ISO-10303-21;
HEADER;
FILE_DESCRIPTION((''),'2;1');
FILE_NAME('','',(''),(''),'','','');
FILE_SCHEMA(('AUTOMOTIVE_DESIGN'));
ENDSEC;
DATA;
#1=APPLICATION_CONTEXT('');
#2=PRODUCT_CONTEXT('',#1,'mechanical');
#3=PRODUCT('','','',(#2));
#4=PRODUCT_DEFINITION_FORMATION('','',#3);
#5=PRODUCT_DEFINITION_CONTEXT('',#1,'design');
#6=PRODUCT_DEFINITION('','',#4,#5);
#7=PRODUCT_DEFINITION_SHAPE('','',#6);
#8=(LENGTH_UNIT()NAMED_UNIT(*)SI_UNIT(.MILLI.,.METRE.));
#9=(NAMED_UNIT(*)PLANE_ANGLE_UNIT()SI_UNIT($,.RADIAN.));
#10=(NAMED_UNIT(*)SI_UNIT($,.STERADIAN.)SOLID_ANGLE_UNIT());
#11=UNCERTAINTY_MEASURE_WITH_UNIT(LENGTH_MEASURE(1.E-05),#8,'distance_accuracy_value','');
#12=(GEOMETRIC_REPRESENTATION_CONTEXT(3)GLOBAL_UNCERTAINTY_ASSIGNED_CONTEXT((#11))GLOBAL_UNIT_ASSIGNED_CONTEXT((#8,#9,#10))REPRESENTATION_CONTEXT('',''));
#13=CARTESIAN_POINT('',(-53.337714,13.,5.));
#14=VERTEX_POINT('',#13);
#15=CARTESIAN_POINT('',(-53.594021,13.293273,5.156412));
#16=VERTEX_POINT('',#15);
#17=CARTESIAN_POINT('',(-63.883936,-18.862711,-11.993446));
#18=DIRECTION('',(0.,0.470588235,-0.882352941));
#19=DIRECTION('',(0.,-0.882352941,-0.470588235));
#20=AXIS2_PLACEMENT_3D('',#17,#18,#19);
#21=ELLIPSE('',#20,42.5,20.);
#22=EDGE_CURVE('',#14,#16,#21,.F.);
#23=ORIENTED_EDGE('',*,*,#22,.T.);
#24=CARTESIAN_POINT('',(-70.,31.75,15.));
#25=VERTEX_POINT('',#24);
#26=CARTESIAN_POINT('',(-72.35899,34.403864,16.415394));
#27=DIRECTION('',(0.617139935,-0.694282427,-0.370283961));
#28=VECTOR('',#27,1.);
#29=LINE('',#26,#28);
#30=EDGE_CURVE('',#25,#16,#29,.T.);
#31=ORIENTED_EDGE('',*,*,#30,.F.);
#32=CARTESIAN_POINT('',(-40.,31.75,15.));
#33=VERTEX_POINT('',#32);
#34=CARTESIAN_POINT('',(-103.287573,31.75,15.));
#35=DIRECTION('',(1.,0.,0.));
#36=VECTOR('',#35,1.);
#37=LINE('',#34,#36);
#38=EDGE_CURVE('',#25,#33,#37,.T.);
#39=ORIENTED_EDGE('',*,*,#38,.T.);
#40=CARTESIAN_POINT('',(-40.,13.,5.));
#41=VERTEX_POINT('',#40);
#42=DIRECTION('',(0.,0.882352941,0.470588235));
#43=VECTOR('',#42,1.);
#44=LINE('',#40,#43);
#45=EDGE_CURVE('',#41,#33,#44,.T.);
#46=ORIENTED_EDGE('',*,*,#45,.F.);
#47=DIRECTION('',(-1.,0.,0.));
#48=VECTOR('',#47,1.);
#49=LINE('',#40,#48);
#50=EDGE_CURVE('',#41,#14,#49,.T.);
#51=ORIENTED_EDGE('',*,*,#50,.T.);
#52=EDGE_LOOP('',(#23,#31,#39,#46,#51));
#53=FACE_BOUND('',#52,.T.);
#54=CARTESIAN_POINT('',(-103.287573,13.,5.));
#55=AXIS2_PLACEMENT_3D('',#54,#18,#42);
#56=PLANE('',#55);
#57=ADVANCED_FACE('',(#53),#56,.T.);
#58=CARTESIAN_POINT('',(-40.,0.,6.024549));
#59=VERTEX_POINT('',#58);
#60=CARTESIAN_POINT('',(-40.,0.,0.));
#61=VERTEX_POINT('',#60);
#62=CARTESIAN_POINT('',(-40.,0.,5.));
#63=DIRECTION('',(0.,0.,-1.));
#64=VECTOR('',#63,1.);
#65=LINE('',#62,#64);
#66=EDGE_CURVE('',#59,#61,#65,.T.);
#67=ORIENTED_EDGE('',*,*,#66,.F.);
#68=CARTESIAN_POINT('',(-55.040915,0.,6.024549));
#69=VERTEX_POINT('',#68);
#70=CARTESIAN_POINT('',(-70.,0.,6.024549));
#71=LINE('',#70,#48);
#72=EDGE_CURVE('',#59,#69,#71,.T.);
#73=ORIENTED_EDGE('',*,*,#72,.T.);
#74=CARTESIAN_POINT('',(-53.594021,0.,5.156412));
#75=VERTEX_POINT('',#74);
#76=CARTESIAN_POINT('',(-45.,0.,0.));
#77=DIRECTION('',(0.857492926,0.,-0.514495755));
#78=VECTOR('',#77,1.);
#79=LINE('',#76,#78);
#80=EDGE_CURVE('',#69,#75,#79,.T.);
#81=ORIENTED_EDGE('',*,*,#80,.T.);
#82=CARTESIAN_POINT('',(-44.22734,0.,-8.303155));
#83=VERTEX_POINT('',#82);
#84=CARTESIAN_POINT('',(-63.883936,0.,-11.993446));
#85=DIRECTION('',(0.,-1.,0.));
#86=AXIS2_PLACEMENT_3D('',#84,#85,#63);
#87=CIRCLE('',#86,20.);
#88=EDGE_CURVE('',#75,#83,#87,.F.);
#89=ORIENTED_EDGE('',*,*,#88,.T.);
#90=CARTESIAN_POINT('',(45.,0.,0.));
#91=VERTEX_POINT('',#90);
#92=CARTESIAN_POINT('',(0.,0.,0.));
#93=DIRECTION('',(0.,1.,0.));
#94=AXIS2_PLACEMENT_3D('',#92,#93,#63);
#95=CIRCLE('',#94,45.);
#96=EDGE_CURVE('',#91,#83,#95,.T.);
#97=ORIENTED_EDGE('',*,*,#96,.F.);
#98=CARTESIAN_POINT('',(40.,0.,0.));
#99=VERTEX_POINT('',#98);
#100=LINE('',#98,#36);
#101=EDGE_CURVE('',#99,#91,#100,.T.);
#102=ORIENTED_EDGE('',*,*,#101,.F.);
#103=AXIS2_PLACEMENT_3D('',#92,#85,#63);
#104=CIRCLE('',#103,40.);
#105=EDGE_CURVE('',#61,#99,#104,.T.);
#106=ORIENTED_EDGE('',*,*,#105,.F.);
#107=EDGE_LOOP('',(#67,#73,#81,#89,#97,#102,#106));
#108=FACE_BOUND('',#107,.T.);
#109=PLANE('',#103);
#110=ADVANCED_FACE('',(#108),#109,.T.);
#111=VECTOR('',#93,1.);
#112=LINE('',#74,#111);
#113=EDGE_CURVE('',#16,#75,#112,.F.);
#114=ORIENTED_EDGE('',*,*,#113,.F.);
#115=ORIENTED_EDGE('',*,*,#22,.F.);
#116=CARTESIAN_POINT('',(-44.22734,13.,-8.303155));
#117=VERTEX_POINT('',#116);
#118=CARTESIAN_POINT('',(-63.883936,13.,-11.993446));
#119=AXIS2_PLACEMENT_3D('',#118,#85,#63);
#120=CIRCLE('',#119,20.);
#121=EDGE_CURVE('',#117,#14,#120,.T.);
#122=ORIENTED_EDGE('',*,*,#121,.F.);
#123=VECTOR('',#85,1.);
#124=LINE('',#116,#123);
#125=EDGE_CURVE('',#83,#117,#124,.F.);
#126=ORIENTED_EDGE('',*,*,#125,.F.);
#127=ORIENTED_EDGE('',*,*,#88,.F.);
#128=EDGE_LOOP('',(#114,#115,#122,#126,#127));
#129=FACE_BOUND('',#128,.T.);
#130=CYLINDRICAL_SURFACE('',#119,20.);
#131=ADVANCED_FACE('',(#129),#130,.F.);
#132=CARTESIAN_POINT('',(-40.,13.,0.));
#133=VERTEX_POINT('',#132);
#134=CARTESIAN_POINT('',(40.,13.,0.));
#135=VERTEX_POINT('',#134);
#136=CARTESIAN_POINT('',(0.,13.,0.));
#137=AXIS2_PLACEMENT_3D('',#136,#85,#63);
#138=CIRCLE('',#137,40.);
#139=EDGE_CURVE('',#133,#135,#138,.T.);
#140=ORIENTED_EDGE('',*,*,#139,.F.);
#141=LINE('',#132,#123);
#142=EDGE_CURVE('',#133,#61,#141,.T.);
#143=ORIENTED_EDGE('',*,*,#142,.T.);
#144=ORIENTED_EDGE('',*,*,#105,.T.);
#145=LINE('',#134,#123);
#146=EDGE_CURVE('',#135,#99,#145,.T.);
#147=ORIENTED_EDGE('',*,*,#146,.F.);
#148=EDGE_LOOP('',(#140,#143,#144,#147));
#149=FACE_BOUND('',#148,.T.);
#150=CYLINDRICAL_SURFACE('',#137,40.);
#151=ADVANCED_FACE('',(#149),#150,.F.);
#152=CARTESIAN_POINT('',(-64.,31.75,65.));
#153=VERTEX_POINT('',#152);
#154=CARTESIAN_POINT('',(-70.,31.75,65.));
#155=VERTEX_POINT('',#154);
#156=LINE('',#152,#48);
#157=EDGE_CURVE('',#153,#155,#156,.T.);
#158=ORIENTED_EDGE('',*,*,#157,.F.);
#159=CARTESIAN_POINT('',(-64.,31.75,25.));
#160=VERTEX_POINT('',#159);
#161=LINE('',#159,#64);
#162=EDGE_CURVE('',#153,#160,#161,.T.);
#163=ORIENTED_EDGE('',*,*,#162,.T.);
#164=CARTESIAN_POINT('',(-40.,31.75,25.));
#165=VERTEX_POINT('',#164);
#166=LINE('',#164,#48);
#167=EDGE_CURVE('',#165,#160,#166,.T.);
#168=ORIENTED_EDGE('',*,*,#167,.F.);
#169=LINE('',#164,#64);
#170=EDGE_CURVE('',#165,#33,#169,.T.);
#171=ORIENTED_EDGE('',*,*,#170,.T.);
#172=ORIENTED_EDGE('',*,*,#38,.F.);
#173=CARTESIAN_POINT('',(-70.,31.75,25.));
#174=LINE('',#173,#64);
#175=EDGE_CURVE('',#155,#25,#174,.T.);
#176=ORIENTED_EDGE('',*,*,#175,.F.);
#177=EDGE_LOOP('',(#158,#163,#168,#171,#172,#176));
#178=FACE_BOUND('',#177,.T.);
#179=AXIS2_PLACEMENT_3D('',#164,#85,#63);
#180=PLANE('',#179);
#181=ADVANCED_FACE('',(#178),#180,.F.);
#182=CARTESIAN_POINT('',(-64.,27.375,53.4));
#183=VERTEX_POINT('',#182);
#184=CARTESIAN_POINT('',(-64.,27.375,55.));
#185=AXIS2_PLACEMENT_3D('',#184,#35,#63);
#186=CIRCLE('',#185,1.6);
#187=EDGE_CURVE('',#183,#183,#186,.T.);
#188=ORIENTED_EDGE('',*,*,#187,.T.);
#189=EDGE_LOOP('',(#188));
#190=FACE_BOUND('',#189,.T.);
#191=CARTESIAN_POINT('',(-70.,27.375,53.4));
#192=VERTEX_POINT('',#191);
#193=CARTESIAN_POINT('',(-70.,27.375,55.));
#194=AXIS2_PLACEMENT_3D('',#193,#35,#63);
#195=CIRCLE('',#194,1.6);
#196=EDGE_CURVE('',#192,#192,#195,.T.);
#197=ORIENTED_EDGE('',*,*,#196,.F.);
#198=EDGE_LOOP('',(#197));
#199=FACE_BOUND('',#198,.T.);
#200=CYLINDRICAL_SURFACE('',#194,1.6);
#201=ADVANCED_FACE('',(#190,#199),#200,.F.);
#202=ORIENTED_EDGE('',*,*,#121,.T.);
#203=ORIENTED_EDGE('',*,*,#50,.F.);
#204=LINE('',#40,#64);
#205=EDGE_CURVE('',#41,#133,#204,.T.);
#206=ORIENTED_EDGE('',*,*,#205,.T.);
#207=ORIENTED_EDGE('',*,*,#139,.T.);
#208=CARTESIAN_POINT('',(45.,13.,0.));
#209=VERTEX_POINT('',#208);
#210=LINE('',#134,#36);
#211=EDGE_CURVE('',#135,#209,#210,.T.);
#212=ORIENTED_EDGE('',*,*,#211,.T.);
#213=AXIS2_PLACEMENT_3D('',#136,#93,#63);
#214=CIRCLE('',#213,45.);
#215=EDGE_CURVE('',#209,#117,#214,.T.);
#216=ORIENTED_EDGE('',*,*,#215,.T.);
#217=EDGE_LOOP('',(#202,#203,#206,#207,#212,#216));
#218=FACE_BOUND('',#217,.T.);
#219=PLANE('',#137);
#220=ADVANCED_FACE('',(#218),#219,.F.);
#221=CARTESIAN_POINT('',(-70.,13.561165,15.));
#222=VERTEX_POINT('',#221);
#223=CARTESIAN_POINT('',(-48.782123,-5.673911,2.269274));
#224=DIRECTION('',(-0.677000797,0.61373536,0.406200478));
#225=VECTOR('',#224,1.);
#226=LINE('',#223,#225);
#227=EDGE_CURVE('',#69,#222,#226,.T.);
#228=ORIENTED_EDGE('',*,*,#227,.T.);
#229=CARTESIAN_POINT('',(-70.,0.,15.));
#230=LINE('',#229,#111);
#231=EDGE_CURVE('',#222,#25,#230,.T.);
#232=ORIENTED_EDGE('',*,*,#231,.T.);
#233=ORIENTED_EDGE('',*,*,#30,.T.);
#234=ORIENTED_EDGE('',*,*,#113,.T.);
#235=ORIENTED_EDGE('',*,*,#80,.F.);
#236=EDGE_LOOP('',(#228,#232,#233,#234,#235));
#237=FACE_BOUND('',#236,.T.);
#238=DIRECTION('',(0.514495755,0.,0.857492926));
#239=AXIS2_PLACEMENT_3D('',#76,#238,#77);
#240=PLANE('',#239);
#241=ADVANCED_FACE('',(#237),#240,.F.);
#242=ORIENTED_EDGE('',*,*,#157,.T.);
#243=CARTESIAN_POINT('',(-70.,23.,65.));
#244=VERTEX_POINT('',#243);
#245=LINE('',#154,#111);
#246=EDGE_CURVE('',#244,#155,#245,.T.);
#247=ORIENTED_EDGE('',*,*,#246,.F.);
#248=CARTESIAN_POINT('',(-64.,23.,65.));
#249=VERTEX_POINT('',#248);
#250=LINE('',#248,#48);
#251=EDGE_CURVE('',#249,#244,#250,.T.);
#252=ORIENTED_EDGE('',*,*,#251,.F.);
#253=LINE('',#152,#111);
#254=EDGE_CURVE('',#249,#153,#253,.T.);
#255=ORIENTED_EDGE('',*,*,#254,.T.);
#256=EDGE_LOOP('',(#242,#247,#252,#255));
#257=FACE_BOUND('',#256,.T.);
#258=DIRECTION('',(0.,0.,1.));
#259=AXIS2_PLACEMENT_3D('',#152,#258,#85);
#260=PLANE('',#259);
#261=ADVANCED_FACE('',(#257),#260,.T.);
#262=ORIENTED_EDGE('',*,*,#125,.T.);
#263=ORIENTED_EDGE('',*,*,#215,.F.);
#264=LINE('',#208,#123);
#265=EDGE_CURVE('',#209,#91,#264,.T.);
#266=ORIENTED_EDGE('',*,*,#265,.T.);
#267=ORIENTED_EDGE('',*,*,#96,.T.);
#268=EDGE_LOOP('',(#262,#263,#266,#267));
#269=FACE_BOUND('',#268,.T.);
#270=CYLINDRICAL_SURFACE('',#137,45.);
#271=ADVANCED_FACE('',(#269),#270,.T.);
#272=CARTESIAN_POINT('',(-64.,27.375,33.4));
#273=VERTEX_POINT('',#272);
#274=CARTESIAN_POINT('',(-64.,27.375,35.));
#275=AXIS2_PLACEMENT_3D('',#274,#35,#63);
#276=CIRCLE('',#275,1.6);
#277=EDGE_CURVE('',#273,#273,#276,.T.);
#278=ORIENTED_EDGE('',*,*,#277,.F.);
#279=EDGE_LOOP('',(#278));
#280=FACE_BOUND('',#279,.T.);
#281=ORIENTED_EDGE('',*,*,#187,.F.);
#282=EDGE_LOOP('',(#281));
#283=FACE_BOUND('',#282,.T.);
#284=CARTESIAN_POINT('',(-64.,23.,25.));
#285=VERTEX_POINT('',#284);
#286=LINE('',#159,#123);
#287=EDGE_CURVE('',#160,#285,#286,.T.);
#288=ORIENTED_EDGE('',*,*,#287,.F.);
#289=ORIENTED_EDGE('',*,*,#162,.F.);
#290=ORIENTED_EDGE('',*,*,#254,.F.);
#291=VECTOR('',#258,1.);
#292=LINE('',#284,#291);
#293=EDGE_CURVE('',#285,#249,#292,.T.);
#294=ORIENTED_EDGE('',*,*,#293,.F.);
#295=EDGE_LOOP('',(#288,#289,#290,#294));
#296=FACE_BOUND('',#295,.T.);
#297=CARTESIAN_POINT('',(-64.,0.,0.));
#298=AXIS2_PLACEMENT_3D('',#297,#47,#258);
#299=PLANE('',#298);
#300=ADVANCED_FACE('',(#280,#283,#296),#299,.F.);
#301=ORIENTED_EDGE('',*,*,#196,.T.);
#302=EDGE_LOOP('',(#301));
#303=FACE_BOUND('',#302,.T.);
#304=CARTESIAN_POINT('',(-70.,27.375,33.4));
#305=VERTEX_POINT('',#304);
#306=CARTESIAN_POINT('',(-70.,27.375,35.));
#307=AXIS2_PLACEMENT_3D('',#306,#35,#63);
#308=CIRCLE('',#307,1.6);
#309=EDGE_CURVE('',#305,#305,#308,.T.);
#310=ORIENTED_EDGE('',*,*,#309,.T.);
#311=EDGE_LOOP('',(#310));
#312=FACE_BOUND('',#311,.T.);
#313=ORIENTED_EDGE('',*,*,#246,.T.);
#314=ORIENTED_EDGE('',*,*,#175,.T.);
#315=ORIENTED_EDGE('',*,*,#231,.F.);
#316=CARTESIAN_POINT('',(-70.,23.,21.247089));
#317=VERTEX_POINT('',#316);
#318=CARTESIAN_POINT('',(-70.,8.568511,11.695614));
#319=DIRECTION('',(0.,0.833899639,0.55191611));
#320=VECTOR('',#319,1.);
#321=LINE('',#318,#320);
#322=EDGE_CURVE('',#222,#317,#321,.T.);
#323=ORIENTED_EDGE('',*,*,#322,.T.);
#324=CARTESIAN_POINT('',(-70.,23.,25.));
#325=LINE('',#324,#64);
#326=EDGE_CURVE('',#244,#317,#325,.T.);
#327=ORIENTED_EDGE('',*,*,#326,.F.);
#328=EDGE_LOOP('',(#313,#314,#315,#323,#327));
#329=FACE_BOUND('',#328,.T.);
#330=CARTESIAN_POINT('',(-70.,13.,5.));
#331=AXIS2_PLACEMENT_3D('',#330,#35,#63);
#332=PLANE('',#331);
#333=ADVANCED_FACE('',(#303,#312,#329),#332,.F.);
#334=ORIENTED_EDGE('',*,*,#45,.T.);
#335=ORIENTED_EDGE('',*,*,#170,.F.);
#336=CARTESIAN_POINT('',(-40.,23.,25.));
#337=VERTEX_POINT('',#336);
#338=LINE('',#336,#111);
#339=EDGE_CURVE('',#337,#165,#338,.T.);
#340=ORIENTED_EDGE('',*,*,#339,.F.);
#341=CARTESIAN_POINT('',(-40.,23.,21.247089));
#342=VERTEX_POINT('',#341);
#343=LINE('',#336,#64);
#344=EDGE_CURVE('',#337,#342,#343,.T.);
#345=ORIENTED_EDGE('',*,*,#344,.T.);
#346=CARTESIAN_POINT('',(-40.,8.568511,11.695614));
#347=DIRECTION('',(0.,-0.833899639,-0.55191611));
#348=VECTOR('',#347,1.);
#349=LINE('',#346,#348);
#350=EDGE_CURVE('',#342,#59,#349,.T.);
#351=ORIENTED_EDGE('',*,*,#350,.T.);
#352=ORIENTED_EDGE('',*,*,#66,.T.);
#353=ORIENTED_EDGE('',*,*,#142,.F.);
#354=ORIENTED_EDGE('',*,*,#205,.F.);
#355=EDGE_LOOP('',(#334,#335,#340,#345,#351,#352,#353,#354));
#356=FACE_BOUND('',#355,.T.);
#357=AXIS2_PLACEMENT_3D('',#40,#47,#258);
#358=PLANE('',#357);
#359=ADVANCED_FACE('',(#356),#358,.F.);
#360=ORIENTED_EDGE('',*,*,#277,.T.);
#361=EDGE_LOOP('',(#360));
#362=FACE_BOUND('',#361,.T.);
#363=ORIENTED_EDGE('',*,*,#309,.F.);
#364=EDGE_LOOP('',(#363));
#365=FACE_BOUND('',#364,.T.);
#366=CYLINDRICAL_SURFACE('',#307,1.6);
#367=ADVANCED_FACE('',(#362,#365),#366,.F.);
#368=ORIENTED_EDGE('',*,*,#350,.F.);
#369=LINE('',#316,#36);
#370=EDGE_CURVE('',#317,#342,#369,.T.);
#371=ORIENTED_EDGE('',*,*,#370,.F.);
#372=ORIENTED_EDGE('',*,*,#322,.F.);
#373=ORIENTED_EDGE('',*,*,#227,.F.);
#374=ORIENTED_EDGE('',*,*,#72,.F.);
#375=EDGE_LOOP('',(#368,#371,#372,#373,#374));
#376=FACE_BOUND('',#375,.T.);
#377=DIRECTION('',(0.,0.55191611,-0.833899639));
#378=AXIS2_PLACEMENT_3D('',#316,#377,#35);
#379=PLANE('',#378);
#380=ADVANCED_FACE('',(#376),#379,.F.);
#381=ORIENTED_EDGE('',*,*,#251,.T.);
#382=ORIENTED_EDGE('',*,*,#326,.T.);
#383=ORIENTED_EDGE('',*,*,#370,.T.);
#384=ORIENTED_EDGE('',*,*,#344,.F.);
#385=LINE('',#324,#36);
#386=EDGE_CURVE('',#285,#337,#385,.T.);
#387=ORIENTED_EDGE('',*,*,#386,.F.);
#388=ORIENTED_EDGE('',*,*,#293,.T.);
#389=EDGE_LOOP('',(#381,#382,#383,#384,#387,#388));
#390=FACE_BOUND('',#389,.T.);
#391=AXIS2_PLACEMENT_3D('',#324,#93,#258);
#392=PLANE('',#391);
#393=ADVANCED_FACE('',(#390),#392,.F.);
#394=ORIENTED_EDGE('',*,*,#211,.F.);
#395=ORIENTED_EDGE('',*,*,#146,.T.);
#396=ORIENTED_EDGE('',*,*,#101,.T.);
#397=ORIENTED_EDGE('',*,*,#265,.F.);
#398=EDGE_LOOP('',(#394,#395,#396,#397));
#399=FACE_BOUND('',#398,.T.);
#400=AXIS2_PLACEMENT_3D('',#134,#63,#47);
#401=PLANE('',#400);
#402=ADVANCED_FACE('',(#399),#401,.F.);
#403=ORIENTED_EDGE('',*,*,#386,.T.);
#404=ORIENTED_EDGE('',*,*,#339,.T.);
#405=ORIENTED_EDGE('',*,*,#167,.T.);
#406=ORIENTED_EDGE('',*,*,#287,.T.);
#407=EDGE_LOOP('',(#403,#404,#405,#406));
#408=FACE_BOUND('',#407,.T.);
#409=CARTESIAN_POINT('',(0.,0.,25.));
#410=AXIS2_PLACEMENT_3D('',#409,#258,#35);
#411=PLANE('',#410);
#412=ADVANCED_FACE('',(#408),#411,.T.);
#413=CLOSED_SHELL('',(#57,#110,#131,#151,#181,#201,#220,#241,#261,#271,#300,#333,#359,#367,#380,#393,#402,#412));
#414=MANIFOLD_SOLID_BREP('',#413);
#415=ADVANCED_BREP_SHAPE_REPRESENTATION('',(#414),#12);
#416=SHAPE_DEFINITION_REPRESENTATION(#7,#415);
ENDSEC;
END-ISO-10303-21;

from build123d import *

# Parameters (mm, degrees)
EXTRUDE_1_DEPTH          = 13
SKETCH_2_W               = 30
SKETCH_2_H               = 13
EXTRUDE_2_DEPTH          = 5
EXTRUDE_3_DEPTH          = 30
SKETCH_4_W               = 30
SKETCH_4_H               = 8.75
EXTRUDE_4_DEPTH          = 10
CUT_EXTRUDE_3_DEPTH      = 86.302769592
CUT_EXTRUDE_3_DEPTH_BACK = 86.302769592
SKETCH_9_W               = 40
SKETCH_9_H               = 8.75
EXTRUDE_5_DEPTH          = 6
SKETCH_10_R              = 1.6
CUT_EXTRUDE_4_DEPTH      = 131.820726569
PATTERN_LINEAR_1_COUNT   = 2
PATTERN_LINEAR_1_PITCH   = 20
CHAMFER_3_SIZE           = 30
CHAMFER_3_SIZE_2         = 6.247089083
FILLET_1_R               = 20


with BuildPart() as part:
    # 草圖1 → 填料-伸長1 (new body)
    with BuildSketch(Plane(origin=(0, 0, 0), x_dir=(1, 0, 0), z_dir=(0, 1, 0))):
        with BuildLine():
            Line((-45, 0), (-40, 0))
            ThreePointArc((-40, 0), (0, 40), (40, 0))
            Line((40, 0), (45, 0))
            ThreePointArc((45, 0), (0, 45), (-45, 0))
        make_face()
    extrude(amount=EXTRUDE_1_DEPTH)

    # 草圖2 → 填料-伸長2 (add)
    with BuildSketch(Plane.XY):
        with Locations((-55, 6.5)):
            Rectangle(SKETCH_2_W, SKETCH_2_H)
    extrude(amount=EXTRUDE_2_DEPTH)

    # 草圖3 → 填料-伸長3 (add)
    with BuildSketch(Plane(origin=(-40, 0, 0), x_dir=(0, 0, -1), z_dir=(1, 0, 0))):
        Polygon((-5, 0), (-5, 13), (-15, 31.75), (-15, 23), align=None)
    extrude(amount=-EXTRUDE_3_DEPTH)

    # 草圖4 → 填料-伸長4 (add)
    with BuildSketch(Plane.XY.offset(15)):
        with Locations((-55, 27.375)):
            Rectangle(SKETCH_4_W, SKETCH_4_H)
    extrude(amount=EXTRUDE_4_DEPTH)

    # 草圖8 → 除料-伸長3 (cut, two sides: drawn at the far end of the back side and taken through both)
    with BuildSketch(Plane(origin=(0, 13, 0), x_dir=(1, 0, 0), z_dir=(0, 1, 0)).offset(-CUT_EXTRUDE_3_DEPTH_BACK)):
        Polygon((-45, 0), (-70, -15), (-70, 0), align=None)
    extrude(amount=CUT_EXTRUDE_3_DEPTH + CUT_EXTRUDE_3_DEPTH_BACK, mode=Mode.SUBTRACT)

    # 草圖9 → 填料-伸長5 (add)
    with BuildSketch(Plane.ZY.offset(70)):
        with Locations((45, 27.375)):
            Rectangle(SKETCH_9_W, SKETCH_9_H)
    extrude(amount=-EXTRUDE_5_DEPTH)

    # 草圖10 → 除料-伸長4 (cut, through all)
    with BuildSketch(Plane(origin=(-64, 0, 0), x_dir=(0, 0, -1), z_dir=(1, 0, 0))):
        with Locations((-35, 27.375)):
            Circle(SKETCH_10_R)
    cut_extrude_4 = extrude(amount=-CUT_EXTRUDE_4_DEPTH, mode=Mode.SUBTRACT)

    # 直線複製排列1: 除料-伸長4 ×2
    with Locations(*[(0, 0, i * PATTERN_LINEAR_1_PITCH) for i in range(1, PATTERN_LINEAR_1_COUNT)]):
        add(cut_extrude_4, mode=Mode.SUBTRACT)

    # 導角3
    # the kernel refuses this chamfer: 30, 6.247089083 mm, written as the material it adds along each edge
    with BuildSketch(Plane(origin=(-40, 23, 15), x_dir=(0, -0.9143850797176141, -0.4048455581944953), z_dir=(-1, 0, 0))) as chamfer_3_piece_1_section:
        Polygon((CHAMFER_3_SIZE * 0.999977671636, CHAMFER_3_SIZE * 0.0066825316561), (-CHAMFER_3_SIZE_2 * 0.404845558197, CHAMFER_3_SIZE_2 * 0.914385079723), (0, 0), align=None)
    chamfer_3_piece_1 = extrude(amount=30, mode=Mode.PRIVATE)
    chamfer_3_piece_1 = split(chamfer_3_piece_1, bisect_by=Plane(origin=(-53.38759528, 0, 13.91258777), z_dir=(0, 1, 0)), keep=Keep.TOP, mode=Mode.PRIVATE)
    chamfer_3_piece_1 = split(chamfer_3_piece_1, bisect_by=Plane(origin=(-57.305255839, 15.236001875, 7.383153504), z_dir=(0.5144957554275266, 0, 0.8574929257125442)), keep=Keep.TOP, mode=Mode.PRIVATE)
    add(chamfer_3_piece_1)

    # 圓角1
    fillet_1_edges = [part.edges().sort_by_distance(p)[0] for p in [
        (-45, 6.5, 0),
    ]]
    fillet(fillet_1_edges, radius=FILLET_1_R)


solid = part.part
